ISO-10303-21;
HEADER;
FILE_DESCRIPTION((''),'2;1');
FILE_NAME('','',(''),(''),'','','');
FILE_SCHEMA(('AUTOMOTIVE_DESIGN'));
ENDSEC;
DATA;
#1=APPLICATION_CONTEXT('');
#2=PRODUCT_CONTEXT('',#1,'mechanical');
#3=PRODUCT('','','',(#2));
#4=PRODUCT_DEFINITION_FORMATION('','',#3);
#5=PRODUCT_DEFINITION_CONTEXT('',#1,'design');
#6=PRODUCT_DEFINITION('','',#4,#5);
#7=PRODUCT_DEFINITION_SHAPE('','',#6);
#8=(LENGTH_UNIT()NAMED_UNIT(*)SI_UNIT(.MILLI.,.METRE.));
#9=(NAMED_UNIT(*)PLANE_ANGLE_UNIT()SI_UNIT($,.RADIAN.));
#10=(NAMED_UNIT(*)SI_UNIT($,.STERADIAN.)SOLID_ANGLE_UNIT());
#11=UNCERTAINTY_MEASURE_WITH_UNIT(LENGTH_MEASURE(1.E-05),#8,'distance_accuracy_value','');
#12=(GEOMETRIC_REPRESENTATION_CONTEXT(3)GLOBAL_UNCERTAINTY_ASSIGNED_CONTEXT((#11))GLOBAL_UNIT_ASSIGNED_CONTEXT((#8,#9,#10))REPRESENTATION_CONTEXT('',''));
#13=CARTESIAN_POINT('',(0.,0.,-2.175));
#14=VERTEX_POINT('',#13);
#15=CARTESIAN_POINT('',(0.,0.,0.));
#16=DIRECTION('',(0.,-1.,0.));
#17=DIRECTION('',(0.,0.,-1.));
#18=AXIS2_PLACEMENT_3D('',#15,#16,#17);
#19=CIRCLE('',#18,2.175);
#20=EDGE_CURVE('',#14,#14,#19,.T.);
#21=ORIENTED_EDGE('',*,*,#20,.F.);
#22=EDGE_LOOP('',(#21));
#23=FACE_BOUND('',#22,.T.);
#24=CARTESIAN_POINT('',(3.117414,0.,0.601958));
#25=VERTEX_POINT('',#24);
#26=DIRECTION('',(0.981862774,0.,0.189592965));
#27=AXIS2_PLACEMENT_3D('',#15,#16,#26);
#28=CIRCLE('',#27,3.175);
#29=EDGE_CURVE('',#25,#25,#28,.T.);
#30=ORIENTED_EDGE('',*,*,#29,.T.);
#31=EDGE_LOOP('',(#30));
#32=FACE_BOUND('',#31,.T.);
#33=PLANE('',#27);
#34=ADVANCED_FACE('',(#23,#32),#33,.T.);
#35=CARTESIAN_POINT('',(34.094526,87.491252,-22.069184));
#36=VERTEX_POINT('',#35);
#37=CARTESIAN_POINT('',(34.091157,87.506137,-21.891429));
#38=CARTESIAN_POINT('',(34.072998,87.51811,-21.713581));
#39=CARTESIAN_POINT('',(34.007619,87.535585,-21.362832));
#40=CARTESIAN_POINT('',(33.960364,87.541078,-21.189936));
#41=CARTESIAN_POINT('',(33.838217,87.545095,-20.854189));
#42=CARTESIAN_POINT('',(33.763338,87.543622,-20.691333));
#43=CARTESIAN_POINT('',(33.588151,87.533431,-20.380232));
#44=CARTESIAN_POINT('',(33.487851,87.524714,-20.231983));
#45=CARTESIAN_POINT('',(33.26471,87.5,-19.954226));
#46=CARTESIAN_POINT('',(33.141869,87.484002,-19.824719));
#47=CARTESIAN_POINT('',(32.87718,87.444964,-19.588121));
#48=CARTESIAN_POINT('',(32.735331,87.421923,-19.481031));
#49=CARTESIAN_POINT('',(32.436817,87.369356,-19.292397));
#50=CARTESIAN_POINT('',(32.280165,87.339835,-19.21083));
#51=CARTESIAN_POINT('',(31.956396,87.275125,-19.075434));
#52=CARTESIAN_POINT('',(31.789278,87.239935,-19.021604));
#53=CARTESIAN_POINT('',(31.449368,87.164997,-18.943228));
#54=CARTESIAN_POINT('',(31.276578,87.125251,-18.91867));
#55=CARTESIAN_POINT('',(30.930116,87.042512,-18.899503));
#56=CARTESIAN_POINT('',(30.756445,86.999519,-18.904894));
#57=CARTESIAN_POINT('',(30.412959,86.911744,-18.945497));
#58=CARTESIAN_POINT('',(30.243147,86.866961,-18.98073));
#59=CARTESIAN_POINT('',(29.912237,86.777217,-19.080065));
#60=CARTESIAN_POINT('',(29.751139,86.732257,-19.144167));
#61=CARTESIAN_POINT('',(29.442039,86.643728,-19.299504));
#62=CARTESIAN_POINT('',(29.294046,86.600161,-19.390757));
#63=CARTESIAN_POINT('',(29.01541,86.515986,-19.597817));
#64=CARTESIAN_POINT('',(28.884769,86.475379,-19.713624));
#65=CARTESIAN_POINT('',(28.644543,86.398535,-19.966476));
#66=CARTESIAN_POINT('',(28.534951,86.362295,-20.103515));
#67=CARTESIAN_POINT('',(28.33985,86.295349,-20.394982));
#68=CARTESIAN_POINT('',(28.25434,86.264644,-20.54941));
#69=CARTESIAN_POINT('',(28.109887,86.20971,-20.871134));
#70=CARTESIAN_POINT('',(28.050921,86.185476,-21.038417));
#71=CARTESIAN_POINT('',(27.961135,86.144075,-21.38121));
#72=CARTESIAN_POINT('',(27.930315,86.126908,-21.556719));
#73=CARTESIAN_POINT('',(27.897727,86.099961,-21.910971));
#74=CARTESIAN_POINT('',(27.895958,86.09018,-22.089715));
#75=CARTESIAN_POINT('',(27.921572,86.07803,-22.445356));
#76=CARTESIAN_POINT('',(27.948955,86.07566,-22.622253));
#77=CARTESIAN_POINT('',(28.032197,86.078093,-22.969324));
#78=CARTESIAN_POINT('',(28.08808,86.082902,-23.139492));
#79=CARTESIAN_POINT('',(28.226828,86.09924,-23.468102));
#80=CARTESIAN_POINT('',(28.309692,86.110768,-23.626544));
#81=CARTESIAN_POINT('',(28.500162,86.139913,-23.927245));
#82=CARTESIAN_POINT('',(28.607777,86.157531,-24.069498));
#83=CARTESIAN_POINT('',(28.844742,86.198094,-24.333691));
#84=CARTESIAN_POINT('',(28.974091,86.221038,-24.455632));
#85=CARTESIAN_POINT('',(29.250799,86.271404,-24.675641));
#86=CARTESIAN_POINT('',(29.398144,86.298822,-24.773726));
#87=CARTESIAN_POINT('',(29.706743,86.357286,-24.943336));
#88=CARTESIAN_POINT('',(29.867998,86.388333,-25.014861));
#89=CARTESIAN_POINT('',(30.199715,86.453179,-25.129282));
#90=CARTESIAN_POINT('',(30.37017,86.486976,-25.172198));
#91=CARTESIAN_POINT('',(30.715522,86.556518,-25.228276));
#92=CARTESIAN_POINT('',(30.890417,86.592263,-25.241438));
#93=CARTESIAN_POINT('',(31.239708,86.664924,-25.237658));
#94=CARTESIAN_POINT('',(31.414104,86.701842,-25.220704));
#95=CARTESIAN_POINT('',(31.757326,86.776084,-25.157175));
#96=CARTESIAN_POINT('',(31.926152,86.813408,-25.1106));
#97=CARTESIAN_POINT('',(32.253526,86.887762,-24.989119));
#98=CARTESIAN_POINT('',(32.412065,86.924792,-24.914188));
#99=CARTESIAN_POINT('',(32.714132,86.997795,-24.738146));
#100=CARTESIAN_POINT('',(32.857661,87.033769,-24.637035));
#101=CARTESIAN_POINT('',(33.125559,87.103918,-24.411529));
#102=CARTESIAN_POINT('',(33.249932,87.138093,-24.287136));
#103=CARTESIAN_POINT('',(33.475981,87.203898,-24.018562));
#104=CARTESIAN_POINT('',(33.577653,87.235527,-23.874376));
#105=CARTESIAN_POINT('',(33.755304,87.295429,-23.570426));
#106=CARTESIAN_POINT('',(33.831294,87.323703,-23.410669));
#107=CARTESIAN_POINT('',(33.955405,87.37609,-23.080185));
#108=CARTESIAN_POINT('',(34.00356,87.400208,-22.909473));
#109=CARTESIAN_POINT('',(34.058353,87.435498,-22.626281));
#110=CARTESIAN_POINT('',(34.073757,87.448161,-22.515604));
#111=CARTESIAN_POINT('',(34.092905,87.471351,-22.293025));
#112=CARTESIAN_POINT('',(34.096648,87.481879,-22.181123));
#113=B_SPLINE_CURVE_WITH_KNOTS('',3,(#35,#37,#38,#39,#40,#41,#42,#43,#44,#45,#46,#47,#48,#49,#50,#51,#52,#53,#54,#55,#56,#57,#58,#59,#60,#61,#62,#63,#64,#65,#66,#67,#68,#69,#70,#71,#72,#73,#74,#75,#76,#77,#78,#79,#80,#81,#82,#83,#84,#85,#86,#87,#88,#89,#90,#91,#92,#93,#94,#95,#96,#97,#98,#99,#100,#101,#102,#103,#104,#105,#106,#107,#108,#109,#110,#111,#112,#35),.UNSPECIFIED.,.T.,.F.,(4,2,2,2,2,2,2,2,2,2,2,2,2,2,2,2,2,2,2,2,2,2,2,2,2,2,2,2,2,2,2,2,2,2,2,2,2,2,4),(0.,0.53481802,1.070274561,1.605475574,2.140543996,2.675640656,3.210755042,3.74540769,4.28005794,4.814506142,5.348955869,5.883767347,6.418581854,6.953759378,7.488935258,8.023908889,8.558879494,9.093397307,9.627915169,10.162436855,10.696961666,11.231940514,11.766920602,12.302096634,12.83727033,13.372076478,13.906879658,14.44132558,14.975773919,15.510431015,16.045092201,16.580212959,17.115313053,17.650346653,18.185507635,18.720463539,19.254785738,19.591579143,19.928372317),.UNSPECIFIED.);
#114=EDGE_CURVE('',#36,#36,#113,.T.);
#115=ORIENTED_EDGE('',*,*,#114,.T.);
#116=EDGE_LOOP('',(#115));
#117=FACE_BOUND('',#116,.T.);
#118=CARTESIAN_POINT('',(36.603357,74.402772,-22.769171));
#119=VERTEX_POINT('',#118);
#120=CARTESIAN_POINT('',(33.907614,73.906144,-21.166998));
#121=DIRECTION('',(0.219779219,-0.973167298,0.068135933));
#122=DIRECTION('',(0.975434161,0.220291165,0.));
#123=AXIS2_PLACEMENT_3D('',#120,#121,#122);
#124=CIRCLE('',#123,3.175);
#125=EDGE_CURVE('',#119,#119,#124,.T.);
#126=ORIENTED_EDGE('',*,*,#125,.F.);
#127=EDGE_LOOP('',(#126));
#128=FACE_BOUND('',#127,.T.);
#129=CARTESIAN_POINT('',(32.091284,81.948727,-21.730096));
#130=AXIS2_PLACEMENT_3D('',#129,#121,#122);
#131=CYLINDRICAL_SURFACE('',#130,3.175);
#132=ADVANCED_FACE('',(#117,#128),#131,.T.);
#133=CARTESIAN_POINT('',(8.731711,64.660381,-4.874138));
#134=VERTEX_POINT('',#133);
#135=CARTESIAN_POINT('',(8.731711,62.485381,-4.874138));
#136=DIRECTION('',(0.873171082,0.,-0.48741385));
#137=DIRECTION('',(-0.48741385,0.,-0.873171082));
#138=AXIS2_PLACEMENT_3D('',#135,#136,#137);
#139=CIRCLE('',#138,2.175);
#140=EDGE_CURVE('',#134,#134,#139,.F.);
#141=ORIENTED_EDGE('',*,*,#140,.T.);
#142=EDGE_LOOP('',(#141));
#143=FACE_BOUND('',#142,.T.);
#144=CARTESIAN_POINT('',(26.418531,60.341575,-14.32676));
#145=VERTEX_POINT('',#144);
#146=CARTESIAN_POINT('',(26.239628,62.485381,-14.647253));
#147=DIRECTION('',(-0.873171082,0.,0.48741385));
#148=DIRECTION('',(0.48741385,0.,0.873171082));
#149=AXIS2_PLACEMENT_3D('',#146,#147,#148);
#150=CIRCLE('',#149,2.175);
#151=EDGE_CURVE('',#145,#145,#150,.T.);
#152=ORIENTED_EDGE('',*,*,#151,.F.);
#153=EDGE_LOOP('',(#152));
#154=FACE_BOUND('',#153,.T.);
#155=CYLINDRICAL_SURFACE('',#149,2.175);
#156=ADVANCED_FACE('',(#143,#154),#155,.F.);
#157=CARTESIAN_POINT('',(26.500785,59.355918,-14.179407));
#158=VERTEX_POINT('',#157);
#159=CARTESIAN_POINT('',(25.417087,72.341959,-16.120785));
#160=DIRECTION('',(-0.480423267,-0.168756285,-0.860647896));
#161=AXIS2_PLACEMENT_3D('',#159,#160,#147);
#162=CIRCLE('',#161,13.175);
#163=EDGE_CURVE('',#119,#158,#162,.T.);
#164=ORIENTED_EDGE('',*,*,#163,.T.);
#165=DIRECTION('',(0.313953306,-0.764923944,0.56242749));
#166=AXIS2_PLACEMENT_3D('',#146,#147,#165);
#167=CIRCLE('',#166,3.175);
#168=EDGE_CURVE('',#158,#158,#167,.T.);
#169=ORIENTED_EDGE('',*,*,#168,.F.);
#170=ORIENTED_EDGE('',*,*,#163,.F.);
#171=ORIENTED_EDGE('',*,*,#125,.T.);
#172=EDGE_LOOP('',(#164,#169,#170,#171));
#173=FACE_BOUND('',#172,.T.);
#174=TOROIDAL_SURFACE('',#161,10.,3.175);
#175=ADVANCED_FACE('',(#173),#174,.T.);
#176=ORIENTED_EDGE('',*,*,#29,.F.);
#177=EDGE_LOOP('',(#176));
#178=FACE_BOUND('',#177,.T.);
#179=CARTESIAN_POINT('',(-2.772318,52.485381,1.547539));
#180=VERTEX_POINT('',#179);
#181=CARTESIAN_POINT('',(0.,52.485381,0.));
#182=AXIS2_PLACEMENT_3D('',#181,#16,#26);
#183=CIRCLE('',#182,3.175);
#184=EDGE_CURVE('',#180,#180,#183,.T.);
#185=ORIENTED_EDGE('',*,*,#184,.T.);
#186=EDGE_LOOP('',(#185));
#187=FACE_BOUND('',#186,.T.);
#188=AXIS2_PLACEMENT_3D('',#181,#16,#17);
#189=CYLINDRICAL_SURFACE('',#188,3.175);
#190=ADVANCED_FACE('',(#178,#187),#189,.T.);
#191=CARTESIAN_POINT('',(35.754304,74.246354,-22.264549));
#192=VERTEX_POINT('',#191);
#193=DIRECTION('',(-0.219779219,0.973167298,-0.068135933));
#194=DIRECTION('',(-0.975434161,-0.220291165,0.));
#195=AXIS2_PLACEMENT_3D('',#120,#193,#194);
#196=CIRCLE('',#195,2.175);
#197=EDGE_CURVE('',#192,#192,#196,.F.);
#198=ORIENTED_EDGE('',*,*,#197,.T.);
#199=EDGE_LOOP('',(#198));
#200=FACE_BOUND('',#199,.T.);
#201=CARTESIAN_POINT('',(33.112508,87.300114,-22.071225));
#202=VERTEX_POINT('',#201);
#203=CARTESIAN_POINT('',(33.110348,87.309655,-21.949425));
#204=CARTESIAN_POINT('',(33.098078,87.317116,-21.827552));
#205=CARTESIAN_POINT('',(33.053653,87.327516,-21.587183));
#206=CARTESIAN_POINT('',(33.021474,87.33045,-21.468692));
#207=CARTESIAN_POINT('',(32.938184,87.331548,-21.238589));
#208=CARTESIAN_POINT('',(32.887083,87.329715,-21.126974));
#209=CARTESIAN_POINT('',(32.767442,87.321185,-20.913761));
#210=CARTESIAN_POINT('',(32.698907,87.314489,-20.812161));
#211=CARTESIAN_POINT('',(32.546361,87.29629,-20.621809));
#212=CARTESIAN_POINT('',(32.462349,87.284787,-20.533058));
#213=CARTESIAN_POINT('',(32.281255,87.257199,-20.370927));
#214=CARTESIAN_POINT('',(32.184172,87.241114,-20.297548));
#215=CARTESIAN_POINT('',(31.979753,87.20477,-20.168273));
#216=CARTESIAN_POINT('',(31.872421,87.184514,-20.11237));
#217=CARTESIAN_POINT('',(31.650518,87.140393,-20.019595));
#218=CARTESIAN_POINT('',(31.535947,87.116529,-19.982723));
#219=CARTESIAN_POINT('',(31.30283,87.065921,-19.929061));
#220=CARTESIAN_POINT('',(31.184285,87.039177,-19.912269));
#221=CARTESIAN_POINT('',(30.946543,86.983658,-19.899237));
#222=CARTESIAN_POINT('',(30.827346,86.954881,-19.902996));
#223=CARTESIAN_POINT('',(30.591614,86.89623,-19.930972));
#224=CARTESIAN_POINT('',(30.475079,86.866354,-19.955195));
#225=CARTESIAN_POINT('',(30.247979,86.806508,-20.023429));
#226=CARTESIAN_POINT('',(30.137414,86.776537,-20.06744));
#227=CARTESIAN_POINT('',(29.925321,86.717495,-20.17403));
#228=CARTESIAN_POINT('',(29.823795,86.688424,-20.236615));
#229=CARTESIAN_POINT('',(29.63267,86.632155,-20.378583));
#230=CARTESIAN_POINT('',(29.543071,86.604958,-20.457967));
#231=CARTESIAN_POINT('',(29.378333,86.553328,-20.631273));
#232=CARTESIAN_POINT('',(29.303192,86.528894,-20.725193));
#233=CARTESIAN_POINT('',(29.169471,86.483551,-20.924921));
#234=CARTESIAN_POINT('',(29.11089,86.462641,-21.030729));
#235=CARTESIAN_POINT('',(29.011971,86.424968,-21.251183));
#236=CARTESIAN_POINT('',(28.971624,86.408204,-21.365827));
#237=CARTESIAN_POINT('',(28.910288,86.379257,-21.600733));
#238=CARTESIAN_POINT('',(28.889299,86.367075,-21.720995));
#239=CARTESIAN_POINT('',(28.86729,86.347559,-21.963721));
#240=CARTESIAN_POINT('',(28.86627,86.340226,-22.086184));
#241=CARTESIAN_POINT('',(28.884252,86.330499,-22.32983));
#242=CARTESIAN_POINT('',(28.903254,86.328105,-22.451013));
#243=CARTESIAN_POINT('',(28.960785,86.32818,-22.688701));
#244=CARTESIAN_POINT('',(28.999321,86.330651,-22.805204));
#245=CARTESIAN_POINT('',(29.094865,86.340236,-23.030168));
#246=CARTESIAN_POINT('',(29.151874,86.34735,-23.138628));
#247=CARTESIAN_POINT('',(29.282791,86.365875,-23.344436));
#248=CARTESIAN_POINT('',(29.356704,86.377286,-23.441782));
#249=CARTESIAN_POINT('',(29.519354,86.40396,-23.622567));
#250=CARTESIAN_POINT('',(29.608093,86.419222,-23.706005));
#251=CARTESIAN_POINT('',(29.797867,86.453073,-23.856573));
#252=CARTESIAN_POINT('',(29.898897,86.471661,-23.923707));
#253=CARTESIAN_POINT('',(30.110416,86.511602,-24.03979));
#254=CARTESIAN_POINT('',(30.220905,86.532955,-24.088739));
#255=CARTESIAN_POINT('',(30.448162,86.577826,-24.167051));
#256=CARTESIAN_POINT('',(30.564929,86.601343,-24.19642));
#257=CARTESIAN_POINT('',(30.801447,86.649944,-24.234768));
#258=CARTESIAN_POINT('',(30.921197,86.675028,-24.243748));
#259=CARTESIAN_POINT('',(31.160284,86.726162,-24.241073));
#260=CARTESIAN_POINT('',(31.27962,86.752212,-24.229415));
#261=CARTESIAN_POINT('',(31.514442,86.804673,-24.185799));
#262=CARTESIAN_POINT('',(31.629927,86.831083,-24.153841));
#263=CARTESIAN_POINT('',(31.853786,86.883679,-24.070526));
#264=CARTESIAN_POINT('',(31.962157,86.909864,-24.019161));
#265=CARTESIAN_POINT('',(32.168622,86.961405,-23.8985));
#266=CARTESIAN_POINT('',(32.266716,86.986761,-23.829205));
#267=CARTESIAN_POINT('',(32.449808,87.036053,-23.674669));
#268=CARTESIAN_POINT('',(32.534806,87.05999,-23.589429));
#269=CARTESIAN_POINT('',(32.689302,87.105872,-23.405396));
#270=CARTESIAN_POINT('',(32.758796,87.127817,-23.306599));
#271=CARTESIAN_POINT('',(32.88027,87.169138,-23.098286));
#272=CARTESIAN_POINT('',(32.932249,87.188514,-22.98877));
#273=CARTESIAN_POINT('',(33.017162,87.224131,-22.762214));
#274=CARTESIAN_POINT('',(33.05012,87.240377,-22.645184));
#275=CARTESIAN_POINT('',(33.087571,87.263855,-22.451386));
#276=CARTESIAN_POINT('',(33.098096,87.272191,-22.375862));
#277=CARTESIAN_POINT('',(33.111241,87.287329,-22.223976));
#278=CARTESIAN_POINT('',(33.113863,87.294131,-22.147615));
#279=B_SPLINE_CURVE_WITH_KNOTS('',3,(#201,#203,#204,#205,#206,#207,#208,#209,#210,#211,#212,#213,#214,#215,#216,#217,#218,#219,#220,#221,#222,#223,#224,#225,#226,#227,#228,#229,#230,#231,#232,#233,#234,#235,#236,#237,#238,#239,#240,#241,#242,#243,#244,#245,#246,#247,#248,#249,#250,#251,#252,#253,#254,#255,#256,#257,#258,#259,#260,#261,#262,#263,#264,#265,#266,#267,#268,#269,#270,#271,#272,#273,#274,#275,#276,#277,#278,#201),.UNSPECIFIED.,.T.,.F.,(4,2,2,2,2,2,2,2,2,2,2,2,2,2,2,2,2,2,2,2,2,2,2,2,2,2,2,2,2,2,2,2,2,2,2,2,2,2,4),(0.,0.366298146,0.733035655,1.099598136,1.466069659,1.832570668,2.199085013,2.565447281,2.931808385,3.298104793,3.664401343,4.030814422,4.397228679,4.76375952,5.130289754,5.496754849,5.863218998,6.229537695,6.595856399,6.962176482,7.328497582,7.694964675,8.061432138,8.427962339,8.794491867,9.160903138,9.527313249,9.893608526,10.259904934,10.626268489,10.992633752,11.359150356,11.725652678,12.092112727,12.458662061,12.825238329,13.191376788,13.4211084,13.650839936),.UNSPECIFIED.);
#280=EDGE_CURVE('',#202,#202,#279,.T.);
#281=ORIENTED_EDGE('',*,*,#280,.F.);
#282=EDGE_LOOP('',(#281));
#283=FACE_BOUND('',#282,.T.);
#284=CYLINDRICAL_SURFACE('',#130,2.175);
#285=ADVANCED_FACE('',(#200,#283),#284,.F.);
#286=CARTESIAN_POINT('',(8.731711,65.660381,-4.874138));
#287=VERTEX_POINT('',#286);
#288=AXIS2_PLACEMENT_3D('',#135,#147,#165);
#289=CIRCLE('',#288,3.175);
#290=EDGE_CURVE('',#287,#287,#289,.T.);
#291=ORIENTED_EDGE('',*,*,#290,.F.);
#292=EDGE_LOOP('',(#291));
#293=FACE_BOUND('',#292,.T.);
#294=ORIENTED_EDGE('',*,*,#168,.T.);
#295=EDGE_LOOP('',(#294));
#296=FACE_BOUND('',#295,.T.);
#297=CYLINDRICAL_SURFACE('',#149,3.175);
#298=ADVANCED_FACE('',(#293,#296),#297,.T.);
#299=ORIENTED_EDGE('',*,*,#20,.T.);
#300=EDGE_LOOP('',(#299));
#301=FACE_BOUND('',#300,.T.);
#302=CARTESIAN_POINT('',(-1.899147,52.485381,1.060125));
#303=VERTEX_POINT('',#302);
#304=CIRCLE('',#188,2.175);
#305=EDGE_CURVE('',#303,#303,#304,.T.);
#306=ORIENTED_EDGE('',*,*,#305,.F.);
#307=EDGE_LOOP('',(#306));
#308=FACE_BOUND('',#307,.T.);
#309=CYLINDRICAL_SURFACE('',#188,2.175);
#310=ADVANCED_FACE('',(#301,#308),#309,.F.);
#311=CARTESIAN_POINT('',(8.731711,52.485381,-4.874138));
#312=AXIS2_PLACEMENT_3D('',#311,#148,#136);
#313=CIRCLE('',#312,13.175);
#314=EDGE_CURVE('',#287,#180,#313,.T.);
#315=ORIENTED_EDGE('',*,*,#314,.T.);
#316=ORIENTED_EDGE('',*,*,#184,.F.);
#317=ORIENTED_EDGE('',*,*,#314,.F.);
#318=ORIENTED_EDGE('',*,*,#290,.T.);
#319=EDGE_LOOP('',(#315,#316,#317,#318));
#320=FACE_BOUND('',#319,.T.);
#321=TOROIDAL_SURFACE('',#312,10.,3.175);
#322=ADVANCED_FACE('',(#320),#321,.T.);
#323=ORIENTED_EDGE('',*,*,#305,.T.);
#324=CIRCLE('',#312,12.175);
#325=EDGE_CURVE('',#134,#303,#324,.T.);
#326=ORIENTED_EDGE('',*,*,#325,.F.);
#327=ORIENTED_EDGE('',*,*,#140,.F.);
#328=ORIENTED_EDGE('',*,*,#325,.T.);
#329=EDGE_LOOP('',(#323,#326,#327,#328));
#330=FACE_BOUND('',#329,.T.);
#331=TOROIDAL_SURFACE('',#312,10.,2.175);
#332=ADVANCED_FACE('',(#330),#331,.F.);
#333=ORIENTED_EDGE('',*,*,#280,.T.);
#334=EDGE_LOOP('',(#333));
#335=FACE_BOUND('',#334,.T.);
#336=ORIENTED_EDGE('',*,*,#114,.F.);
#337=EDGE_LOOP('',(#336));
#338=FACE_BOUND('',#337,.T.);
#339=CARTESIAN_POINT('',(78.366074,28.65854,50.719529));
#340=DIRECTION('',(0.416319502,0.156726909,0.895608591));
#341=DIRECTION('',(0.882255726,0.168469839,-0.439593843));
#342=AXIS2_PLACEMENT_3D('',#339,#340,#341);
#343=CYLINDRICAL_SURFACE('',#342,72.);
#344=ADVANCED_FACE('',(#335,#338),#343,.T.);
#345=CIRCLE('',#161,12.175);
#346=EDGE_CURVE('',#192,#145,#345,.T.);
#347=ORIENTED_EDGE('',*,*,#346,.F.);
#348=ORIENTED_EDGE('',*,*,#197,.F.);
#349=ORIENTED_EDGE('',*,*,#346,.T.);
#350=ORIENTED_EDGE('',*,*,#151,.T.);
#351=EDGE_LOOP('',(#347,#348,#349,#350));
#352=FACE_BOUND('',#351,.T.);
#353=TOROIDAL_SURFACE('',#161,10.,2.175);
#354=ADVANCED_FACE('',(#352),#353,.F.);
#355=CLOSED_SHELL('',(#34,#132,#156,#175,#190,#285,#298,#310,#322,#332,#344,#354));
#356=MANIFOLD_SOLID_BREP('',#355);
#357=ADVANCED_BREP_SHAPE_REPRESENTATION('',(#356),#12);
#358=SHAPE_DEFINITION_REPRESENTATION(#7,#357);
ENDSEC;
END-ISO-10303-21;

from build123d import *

# Parameters (mm, degrees)
SWEEP_THIN1_PROFILE_R     = 3.175
SWEEP_THIN1_PROFILE_R_2   = 2.175
BOSS_EXTRUDE1_OUTLINE_R   = 3.175
BOSS_EXTRUDE1_OUTLINE_R_2 = 2.175
BOSS_EXTRUDE1_DEPTH       = 5.033072262
BOSS_EXTRUDE1_START       = 3
BOSS_EXTRUDE1_2_DEPTH     = 8


with BuildPart() as part:
    # Sweep-Thin1: sweep along a curve in space
    with BuildLine() as sweep_thin1_path:
        Line((0, 0, 0), (0, 41.3, 0))
        Line((0, 41.3, 0), (0, 52.485381189, 0))
        ThreePointArc((8.731710823, 62.485381189, -4.874138499), (2.557458889, 59.556449001, -1.427602114), (0, 52.485381189, 0))
        Line((8.731710823, 62.485381189, -4.874138499), (26.239628077, 62.485381189, -14.647253442))
        ThreePointArc((26.239628077, 62.485381189, -14.647253442), (32.596698174, 65.949204532, -18.875029244), (33.90761411, 73.906143624, -21.166997899))
        Line((32.091284349, 81.948727145, -21.730096286), (33.90761411, 73.906143624, -21.166997899))
    # Sweep-Thin1 profile (on start of the path) → Sweep-Thin1 (sweep)
    with BuildSketch(Plane.ZX):
        Circle(SWEEP_THIN1_PROFILE_R)
        Circle(SWEEP_THIN1_PROFILE_R_2, mode=Mode.SUBTRACT)
    sweep(path=sweep_thin1_path.line)

    # Boss-Extrude1: read off the stored shape, not the designer's step
    # Boss-Extrude1 outline → Boss-Extrude1 (add)
    with BuildSketch(Plane(origin=(-16.302656388, 72.187043596, -5.054148045), x_dir=(0.9755496373305654, 0.2192425074835292, -0.015350179690706331), z_dir=(-0.21977921899989167, 0.973167297783081, -0.06813593340796047))):
        with Locations((49.606846115, 15.953433297)):
            Circle(BOSS_EXTRUDE1_OUTLINE_R)
        with Locations((49.606846115, 15.953433297)):
            Circle(BOSS_EXTRUDE1_OUTLINE_R_2, mode=Mode.SUBTRACT)
    extrude(amount=BOSS_EXTRUDE1_DEPTH)

    # Boss-Extrude1 2 outline → Boss-Extrude1 2 (cut)
    with BuildSketch(Plane(origin=(0, 0, 0), x_dir=(0.9092183851510403, -0.07176325268657005, -0.4100877511791569), z_dir=(0.41631950242972593, 0.156726908876634, 0.8956085908088649)).offset(BOSS_EXTRUDE1_START)):
        with BuildLine():
            ThreePointArc((30.991714154, 89.351616158), (32.537128586, 89.718539367), (34.090261078, 90.051282317))
            Line((34.090261078, 90.051282317), (35, 90.235713443))
            Line((35, 90.235713443), (35, 90.350121944))
            Line((35, 90.350121944), (34.072560393, 90.119086943))
            Line((34.072560393, 90.119086943), (30.991714154, 89.351616158))
        make_face()
        with BuildLine():
            ThreePointArc((27.927036801, 88.515957727), (29.454766368, 88.950690302), (30.991714154, 89.351616158))
            Line((30.991714154, 89.351616158), (27.910868159, 88.584144334))
            Line((27.910868159, 88.584144334), (27, 88.357237456))
            Line((27, 88.357237456), (27, 88.241069912))
            Line((27, 88.241069912), (27.927036801, 88.515957727))
        make_face()
    extrude(amount=BOSS_EXTRUDE1_2_DEPTH, mode=Mode.SUBTRACT)


solid = part.part
